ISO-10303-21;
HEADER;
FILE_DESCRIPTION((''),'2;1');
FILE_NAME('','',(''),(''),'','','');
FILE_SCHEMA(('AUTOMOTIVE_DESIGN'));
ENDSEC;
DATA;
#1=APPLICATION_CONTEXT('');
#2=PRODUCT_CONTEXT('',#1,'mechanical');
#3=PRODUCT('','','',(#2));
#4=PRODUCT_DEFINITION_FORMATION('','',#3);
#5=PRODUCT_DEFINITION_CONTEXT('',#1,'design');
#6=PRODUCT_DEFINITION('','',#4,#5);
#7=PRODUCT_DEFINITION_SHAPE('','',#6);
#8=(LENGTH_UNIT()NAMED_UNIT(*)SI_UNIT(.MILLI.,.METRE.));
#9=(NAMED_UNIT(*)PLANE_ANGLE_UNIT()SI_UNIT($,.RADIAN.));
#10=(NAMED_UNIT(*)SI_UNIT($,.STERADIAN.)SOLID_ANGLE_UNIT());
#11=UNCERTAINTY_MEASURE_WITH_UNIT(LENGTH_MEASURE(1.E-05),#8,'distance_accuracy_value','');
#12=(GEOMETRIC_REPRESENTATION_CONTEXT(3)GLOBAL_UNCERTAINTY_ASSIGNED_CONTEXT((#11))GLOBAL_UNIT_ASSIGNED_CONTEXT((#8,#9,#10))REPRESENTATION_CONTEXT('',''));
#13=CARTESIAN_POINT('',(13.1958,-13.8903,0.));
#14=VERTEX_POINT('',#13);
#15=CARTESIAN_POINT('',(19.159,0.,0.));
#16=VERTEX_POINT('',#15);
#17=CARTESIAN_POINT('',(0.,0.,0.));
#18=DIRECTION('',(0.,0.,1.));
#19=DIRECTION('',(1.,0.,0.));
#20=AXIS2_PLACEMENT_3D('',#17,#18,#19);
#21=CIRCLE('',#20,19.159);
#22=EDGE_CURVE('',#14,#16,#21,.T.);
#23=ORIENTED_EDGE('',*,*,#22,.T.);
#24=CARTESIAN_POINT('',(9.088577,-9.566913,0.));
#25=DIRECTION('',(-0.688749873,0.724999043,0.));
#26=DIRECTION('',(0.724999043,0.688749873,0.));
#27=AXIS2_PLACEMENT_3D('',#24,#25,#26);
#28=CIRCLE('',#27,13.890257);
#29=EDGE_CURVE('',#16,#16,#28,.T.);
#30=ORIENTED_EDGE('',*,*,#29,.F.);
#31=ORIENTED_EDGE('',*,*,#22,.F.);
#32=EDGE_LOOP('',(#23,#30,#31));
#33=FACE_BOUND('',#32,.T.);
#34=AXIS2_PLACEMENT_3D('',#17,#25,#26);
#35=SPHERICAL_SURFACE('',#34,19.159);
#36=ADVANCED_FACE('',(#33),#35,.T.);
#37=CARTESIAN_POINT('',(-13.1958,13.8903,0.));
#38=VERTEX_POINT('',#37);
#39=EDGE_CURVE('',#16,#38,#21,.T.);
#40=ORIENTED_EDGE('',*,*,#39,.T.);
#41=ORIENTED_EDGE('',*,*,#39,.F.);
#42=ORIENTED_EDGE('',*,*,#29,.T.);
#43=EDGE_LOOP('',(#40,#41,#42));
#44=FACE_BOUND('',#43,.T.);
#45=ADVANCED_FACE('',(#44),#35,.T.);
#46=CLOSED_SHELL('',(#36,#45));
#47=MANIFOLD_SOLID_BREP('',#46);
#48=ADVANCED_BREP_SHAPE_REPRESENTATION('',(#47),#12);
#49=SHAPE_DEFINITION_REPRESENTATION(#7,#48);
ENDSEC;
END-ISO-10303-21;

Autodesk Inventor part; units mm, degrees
ref_plane "YZ Plane" through (0, 0, 0) normal (1, 0, 0) x (0, 1, 0)
ref_plane "XZ Plane" through (0, 0, 0) normal (0, 1, 0) x (-1, 0, 0)
ref_plane "XY Plane" through (0, 0, 0) normal (0, 0, 1) x (1, 0, 0)
sketch "Эскиз2" plane through (0, 0, 0) normal (0, 0, 1) x (1, 0, 0)
  circle A0 centre (0, 0) radius 19.159
  line L0 (13.1958, -13.8903) -> (-13.1958, 13.8903)
  dimension "d1" = 360
revolve "Вращение2" add sketch "Эскиз2" angle 360 about axis through (13.1958, -13.8903, 0) along (-0.6887495, 0.7249994, 0) picked at (8.4168, 1.8713) contours A0 L0
properties part number "DOME" material "Каучук, черный"
